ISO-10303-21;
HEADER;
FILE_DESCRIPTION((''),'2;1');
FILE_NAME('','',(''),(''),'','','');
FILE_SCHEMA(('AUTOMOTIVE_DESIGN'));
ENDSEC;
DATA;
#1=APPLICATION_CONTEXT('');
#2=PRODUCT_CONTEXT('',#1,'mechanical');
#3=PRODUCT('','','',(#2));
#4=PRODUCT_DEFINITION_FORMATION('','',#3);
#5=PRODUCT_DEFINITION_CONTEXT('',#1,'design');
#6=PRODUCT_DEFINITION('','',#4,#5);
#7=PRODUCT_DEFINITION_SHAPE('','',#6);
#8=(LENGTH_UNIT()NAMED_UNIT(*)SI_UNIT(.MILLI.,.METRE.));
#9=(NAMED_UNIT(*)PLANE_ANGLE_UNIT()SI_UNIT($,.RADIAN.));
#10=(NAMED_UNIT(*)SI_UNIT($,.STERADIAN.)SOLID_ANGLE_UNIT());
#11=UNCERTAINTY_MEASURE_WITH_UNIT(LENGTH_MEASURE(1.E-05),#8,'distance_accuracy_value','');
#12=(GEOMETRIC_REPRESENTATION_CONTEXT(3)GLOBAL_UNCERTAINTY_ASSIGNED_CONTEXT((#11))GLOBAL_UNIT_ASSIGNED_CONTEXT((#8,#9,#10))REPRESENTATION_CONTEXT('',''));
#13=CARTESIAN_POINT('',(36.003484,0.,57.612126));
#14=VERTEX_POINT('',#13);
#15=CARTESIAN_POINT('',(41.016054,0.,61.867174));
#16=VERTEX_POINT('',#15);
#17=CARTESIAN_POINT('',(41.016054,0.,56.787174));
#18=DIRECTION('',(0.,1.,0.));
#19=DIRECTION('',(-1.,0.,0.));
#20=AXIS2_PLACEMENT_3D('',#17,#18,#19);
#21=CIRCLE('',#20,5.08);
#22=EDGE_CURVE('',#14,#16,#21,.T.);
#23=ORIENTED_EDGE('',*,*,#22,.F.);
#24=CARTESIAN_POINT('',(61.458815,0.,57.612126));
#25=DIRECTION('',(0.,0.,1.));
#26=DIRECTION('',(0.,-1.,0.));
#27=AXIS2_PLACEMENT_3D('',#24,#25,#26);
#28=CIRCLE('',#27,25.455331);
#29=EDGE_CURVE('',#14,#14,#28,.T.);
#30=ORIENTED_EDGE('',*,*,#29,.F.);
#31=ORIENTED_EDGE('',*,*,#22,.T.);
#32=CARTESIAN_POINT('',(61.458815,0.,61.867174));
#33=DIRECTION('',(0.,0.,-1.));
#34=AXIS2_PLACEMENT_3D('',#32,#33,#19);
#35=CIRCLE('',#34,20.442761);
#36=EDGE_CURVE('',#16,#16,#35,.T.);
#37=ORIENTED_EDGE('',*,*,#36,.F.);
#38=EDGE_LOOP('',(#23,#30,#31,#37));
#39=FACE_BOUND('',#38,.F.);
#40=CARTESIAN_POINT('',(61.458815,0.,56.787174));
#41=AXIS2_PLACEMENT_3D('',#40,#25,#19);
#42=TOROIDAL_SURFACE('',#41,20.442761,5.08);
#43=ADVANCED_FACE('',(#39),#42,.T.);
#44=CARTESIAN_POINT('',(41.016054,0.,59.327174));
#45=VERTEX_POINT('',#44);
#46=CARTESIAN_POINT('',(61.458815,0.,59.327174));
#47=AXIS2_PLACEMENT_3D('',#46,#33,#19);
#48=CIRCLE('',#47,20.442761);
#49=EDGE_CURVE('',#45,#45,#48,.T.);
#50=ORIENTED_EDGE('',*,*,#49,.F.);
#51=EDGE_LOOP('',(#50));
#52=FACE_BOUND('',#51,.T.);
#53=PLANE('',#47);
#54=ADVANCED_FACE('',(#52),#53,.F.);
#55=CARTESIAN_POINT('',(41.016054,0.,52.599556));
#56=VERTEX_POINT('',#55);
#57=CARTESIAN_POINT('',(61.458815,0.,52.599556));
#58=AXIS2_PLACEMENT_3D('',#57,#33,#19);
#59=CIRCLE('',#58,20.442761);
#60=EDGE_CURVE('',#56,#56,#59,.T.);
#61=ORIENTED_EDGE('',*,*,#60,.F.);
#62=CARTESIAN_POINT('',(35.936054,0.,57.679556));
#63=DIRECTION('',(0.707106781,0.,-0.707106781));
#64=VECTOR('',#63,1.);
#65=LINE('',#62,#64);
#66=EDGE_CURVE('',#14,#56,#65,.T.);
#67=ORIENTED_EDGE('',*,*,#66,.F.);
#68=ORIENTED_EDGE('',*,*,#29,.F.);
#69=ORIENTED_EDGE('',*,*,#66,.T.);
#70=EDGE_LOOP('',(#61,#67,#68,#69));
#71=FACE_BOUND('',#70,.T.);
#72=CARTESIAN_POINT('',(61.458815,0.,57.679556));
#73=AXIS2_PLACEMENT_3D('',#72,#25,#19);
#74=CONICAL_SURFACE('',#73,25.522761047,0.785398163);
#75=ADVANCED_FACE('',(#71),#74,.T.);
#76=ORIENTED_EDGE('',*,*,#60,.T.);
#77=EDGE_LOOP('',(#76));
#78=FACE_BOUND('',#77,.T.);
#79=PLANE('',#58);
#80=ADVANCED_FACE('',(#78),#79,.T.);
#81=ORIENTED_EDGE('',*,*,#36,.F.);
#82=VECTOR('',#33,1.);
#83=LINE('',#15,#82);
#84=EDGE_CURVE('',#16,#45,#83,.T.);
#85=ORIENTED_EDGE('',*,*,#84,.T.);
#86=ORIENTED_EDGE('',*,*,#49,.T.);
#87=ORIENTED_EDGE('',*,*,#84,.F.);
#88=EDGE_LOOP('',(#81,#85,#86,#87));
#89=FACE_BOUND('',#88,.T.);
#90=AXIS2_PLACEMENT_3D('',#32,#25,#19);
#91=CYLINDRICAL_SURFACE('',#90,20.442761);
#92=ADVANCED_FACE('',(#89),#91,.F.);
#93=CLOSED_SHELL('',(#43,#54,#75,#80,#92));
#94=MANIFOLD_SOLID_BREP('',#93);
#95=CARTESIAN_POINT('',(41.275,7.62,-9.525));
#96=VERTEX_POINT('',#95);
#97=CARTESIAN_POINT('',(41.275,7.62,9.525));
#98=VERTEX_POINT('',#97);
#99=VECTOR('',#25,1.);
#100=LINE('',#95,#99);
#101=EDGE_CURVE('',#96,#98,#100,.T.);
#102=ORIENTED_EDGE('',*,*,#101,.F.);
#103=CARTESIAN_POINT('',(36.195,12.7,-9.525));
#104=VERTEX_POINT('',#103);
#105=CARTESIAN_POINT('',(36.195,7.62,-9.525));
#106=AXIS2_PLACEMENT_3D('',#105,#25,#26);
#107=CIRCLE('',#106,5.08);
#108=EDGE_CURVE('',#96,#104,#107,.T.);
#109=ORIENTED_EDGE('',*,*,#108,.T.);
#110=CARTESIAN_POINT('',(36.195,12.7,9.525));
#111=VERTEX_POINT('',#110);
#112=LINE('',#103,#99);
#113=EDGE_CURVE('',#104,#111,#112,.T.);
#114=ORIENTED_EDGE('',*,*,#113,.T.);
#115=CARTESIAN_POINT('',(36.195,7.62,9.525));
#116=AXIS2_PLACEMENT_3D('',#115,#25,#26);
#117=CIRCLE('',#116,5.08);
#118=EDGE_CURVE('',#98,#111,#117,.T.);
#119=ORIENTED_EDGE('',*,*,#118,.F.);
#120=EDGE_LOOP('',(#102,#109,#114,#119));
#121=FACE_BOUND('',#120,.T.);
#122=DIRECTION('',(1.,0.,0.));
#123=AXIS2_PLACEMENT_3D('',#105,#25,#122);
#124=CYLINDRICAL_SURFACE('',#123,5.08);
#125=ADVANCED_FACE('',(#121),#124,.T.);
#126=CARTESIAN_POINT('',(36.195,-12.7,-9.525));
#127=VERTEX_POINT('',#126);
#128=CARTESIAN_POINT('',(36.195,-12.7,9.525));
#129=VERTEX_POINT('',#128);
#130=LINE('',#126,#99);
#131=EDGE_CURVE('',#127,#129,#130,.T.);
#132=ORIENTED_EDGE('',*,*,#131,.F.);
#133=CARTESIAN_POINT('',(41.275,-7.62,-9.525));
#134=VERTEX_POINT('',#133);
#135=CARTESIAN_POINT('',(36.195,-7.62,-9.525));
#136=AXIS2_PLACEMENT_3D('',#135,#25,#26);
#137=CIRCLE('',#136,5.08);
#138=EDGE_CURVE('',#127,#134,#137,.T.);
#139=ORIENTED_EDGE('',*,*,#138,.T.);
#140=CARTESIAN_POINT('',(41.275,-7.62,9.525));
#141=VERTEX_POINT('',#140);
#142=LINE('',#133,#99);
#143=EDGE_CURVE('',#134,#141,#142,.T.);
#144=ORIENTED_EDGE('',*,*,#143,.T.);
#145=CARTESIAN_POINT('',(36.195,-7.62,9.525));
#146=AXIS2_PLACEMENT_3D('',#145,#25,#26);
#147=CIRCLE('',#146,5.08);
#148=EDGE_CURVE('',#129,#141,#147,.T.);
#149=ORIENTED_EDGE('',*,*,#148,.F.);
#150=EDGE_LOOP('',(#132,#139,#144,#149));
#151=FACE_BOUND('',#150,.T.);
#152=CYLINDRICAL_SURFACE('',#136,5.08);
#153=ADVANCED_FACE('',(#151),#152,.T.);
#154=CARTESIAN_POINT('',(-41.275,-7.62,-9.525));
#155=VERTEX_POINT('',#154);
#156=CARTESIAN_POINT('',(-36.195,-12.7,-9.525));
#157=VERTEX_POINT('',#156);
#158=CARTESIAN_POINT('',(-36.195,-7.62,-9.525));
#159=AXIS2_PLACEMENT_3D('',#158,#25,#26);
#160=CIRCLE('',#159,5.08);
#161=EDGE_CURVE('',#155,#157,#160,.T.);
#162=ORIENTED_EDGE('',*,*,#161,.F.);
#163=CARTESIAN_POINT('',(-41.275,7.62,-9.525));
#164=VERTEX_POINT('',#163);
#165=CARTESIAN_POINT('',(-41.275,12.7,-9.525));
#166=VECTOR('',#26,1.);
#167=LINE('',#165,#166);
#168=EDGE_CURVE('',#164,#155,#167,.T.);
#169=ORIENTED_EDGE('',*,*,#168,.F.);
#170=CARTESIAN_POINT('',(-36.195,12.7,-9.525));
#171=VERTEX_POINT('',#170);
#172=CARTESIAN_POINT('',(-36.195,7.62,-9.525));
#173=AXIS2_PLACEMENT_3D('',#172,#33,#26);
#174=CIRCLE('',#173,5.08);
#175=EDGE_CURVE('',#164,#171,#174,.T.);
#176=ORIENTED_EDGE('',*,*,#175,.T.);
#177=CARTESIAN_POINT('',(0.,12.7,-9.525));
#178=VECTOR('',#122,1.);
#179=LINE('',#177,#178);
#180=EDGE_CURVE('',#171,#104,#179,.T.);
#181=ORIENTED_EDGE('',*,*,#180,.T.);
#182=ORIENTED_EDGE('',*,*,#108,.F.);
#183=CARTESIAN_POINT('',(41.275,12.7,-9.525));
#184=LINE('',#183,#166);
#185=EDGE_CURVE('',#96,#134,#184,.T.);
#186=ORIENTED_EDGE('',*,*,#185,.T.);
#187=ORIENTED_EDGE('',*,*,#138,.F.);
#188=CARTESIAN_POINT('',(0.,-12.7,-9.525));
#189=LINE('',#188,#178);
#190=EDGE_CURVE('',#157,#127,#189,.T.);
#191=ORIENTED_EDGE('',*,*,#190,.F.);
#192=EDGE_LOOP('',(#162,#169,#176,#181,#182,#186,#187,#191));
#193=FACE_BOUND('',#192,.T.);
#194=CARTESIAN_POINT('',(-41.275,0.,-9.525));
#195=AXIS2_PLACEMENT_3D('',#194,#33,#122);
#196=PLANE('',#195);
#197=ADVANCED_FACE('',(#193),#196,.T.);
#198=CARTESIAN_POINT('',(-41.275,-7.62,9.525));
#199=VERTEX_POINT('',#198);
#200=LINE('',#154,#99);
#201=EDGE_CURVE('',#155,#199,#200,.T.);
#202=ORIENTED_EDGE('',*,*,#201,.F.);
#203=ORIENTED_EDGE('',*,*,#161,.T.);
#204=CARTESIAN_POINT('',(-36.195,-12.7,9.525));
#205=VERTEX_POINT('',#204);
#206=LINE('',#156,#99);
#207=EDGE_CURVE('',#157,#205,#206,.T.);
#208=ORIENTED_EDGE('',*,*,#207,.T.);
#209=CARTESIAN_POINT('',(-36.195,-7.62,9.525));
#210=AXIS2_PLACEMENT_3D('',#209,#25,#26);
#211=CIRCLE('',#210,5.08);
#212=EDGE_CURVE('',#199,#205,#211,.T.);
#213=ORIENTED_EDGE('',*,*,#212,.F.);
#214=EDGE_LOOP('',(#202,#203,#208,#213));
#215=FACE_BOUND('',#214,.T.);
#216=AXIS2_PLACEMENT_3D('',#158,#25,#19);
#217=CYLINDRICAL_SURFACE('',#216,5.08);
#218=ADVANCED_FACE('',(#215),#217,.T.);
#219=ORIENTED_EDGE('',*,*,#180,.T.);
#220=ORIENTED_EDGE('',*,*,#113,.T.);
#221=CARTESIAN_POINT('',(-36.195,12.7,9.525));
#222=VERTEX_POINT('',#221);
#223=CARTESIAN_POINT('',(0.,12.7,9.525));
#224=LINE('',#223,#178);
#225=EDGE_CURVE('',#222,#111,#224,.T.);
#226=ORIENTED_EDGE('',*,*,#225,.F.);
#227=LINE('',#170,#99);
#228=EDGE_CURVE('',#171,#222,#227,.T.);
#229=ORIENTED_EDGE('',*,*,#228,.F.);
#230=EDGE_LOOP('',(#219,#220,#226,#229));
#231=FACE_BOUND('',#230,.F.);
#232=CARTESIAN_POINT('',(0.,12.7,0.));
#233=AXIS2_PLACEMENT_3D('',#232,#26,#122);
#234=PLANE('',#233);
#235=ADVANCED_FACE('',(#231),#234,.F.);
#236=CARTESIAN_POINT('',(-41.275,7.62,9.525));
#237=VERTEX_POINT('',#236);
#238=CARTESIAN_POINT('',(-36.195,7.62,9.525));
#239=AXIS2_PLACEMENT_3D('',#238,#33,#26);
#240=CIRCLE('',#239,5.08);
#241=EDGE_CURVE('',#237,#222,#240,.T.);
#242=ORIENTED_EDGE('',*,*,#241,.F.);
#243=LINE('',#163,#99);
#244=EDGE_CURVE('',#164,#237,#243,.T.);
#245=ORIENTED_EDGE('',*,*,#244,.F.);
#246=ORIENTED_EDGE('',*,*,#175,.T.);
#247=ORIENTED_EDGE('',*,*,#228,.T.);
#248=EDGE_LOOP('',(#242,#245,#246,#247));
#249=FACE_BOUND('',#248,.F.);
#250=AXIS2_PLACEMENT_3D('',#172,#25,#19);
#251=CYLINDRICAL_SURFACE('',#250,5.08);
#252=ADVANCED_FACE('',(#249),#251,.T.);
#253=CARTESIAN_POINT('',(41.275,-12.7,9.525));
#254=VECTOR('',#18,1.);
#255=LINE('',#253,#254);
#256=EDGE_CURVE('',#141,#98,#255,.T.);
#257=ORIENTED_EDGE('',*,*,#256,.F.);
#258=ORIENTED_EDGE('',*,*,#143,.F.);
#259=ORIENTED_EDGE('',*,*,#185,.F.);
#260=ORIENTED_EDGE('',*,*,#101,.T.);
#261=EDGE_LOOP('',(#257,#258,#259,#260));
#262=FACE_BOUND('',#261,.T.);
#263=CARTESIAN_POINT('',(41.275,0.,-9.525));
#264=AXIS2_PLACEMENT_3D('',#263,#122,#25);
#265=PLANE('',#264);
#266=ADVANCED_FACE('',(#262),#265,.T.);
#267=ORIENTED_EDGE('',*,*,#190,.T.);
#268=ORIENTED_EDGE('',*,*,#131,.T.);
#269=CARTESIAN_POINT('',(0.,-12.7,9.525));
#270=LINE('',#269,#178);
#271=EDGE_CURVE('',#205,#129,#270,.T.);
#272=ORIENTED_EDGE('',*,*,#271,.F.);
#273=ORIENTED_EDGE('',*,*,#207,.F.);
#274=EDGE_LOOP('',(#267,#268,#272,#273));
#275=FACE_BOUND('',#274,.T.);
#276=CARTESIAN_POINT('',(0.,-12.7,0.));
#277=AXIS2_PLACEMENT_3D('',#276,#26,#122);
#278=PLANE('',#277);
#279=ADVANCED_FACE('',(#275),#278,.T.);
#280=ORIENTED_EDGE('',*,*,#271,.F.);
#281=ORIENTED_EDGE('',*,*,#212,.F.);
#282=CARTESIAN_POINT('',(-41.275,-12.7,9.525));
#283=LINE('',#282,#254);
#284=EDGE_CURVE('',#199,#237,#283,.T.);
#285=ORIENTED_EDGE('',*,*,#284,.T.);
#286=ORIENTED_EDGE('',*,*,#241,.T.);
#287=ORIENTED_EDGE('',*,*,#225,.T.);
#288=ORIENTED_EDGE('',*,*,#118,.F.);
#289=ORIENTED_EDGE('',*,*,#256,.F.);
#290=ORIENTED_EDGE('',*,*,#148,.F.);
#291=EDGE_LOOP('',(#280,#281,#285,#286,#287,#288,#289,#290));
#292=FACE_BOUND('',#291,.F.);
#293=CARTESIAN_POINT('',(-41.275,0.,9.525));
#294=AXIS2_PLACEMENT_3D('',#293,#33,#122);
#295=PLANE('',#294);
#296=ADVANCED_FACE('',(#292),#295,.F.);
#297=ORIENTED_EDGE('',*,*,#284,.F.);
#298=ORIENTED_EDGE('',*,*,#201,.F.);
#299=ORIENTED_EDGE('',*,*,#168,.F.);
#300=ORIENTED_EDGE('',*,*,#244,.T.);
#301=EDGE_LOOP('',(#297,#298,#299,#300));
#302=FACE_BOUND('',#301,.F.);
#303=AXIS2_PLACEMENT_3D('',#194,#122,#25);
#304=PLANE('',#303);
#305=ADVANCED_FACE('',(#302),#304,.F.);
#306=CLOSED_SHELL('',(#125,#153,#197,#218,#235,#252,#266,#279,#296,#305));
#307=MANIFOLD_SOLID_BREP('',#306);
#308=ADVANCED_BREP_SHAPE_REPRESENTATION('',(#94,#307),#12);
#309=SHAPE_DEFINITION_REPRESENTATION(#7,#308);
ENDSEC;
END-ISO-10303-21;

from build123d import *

# Parameters (mm, degrees)
F0_W     = 82.55
F0_H     = 19.05
F1_DEPTH = 12.7
F3_R     = 5.08
F4_R     = 5.08
F6_DEPTH = 2.54


# Not quite as in the source:
# - a fillet or chamfer that OpenCascade refuses, or shapes differently, is made with other operations: its cross-section is extruded or revolved along the edge and cut away or added


with BuildPart() as f1:
    # F0 (on Front) → F1 (new body, symmetric)
    with BuildSketch(Plane.XZ):
        Rectangle(F0_W, F0_H)
    extrude(amount=F1_DEPTH, both=True)

    # F3
    f3_edges = [f1.edges().sort_by_distance(p)[0] for p in [
        (-41.275, -12.7, 0),
        (41.275, -12.7, 0),
        (41.275, 12.7, 0),
        (-41.275, 12.7, 0),
    ]]
    fillet(f3_edges, radius=F3_R)


with BuildPart() as f2:
    # F0 (on Front) → F2 (revolve)
    with BuildSketch(Plane.XZ):
        Polygon((35.9360538423, 61.8671737611), (35.9360538423, 52.5995560322), (50.8114657512, 52.5995560322), (61.4588148892, 52.5995560322), (61.4588148892, 61.8671737611), align=None)
    revolve(axis=Axis((61.4588148892, 0, 54.2103461921), (0, 0, -1)))

    # F4
    f4_edges = [f2.edges().sort_by_distance(p)[0] for p in [
        (86.981576, 0, 61.867174),
    ]]
    fillet(f4_edges, radius=F4_R)

    # F5: chamfer of 5.08 on 1 edges, made by hand

    # F5_s1 → F5_t2 (revolve, cut)
    with BuildSketch(Plane.XZ):
        Polygon((35.9360538423, 57.6795560322), (41.0160538423, 52.5995560322), (35.9360538423, 52.5995560322), align=None)
    revolve(axis=Axis((61.4588148892, 0, 52.5995560322), (0, 0, -1)), mode=Mode.SUBTRACT)

    # F6 (cut): a face of the model
    f6_faces = [f2.faces().sort_by_distance(p)[0] for p in [
        (61.4588148892, 0, 61.8671737611),
    ]]
    extrude(f6_faces, amount=-F6_DEPTH, mode=Mode.SUBTRACT)


solid = Compound([f1.part, f2.part])
